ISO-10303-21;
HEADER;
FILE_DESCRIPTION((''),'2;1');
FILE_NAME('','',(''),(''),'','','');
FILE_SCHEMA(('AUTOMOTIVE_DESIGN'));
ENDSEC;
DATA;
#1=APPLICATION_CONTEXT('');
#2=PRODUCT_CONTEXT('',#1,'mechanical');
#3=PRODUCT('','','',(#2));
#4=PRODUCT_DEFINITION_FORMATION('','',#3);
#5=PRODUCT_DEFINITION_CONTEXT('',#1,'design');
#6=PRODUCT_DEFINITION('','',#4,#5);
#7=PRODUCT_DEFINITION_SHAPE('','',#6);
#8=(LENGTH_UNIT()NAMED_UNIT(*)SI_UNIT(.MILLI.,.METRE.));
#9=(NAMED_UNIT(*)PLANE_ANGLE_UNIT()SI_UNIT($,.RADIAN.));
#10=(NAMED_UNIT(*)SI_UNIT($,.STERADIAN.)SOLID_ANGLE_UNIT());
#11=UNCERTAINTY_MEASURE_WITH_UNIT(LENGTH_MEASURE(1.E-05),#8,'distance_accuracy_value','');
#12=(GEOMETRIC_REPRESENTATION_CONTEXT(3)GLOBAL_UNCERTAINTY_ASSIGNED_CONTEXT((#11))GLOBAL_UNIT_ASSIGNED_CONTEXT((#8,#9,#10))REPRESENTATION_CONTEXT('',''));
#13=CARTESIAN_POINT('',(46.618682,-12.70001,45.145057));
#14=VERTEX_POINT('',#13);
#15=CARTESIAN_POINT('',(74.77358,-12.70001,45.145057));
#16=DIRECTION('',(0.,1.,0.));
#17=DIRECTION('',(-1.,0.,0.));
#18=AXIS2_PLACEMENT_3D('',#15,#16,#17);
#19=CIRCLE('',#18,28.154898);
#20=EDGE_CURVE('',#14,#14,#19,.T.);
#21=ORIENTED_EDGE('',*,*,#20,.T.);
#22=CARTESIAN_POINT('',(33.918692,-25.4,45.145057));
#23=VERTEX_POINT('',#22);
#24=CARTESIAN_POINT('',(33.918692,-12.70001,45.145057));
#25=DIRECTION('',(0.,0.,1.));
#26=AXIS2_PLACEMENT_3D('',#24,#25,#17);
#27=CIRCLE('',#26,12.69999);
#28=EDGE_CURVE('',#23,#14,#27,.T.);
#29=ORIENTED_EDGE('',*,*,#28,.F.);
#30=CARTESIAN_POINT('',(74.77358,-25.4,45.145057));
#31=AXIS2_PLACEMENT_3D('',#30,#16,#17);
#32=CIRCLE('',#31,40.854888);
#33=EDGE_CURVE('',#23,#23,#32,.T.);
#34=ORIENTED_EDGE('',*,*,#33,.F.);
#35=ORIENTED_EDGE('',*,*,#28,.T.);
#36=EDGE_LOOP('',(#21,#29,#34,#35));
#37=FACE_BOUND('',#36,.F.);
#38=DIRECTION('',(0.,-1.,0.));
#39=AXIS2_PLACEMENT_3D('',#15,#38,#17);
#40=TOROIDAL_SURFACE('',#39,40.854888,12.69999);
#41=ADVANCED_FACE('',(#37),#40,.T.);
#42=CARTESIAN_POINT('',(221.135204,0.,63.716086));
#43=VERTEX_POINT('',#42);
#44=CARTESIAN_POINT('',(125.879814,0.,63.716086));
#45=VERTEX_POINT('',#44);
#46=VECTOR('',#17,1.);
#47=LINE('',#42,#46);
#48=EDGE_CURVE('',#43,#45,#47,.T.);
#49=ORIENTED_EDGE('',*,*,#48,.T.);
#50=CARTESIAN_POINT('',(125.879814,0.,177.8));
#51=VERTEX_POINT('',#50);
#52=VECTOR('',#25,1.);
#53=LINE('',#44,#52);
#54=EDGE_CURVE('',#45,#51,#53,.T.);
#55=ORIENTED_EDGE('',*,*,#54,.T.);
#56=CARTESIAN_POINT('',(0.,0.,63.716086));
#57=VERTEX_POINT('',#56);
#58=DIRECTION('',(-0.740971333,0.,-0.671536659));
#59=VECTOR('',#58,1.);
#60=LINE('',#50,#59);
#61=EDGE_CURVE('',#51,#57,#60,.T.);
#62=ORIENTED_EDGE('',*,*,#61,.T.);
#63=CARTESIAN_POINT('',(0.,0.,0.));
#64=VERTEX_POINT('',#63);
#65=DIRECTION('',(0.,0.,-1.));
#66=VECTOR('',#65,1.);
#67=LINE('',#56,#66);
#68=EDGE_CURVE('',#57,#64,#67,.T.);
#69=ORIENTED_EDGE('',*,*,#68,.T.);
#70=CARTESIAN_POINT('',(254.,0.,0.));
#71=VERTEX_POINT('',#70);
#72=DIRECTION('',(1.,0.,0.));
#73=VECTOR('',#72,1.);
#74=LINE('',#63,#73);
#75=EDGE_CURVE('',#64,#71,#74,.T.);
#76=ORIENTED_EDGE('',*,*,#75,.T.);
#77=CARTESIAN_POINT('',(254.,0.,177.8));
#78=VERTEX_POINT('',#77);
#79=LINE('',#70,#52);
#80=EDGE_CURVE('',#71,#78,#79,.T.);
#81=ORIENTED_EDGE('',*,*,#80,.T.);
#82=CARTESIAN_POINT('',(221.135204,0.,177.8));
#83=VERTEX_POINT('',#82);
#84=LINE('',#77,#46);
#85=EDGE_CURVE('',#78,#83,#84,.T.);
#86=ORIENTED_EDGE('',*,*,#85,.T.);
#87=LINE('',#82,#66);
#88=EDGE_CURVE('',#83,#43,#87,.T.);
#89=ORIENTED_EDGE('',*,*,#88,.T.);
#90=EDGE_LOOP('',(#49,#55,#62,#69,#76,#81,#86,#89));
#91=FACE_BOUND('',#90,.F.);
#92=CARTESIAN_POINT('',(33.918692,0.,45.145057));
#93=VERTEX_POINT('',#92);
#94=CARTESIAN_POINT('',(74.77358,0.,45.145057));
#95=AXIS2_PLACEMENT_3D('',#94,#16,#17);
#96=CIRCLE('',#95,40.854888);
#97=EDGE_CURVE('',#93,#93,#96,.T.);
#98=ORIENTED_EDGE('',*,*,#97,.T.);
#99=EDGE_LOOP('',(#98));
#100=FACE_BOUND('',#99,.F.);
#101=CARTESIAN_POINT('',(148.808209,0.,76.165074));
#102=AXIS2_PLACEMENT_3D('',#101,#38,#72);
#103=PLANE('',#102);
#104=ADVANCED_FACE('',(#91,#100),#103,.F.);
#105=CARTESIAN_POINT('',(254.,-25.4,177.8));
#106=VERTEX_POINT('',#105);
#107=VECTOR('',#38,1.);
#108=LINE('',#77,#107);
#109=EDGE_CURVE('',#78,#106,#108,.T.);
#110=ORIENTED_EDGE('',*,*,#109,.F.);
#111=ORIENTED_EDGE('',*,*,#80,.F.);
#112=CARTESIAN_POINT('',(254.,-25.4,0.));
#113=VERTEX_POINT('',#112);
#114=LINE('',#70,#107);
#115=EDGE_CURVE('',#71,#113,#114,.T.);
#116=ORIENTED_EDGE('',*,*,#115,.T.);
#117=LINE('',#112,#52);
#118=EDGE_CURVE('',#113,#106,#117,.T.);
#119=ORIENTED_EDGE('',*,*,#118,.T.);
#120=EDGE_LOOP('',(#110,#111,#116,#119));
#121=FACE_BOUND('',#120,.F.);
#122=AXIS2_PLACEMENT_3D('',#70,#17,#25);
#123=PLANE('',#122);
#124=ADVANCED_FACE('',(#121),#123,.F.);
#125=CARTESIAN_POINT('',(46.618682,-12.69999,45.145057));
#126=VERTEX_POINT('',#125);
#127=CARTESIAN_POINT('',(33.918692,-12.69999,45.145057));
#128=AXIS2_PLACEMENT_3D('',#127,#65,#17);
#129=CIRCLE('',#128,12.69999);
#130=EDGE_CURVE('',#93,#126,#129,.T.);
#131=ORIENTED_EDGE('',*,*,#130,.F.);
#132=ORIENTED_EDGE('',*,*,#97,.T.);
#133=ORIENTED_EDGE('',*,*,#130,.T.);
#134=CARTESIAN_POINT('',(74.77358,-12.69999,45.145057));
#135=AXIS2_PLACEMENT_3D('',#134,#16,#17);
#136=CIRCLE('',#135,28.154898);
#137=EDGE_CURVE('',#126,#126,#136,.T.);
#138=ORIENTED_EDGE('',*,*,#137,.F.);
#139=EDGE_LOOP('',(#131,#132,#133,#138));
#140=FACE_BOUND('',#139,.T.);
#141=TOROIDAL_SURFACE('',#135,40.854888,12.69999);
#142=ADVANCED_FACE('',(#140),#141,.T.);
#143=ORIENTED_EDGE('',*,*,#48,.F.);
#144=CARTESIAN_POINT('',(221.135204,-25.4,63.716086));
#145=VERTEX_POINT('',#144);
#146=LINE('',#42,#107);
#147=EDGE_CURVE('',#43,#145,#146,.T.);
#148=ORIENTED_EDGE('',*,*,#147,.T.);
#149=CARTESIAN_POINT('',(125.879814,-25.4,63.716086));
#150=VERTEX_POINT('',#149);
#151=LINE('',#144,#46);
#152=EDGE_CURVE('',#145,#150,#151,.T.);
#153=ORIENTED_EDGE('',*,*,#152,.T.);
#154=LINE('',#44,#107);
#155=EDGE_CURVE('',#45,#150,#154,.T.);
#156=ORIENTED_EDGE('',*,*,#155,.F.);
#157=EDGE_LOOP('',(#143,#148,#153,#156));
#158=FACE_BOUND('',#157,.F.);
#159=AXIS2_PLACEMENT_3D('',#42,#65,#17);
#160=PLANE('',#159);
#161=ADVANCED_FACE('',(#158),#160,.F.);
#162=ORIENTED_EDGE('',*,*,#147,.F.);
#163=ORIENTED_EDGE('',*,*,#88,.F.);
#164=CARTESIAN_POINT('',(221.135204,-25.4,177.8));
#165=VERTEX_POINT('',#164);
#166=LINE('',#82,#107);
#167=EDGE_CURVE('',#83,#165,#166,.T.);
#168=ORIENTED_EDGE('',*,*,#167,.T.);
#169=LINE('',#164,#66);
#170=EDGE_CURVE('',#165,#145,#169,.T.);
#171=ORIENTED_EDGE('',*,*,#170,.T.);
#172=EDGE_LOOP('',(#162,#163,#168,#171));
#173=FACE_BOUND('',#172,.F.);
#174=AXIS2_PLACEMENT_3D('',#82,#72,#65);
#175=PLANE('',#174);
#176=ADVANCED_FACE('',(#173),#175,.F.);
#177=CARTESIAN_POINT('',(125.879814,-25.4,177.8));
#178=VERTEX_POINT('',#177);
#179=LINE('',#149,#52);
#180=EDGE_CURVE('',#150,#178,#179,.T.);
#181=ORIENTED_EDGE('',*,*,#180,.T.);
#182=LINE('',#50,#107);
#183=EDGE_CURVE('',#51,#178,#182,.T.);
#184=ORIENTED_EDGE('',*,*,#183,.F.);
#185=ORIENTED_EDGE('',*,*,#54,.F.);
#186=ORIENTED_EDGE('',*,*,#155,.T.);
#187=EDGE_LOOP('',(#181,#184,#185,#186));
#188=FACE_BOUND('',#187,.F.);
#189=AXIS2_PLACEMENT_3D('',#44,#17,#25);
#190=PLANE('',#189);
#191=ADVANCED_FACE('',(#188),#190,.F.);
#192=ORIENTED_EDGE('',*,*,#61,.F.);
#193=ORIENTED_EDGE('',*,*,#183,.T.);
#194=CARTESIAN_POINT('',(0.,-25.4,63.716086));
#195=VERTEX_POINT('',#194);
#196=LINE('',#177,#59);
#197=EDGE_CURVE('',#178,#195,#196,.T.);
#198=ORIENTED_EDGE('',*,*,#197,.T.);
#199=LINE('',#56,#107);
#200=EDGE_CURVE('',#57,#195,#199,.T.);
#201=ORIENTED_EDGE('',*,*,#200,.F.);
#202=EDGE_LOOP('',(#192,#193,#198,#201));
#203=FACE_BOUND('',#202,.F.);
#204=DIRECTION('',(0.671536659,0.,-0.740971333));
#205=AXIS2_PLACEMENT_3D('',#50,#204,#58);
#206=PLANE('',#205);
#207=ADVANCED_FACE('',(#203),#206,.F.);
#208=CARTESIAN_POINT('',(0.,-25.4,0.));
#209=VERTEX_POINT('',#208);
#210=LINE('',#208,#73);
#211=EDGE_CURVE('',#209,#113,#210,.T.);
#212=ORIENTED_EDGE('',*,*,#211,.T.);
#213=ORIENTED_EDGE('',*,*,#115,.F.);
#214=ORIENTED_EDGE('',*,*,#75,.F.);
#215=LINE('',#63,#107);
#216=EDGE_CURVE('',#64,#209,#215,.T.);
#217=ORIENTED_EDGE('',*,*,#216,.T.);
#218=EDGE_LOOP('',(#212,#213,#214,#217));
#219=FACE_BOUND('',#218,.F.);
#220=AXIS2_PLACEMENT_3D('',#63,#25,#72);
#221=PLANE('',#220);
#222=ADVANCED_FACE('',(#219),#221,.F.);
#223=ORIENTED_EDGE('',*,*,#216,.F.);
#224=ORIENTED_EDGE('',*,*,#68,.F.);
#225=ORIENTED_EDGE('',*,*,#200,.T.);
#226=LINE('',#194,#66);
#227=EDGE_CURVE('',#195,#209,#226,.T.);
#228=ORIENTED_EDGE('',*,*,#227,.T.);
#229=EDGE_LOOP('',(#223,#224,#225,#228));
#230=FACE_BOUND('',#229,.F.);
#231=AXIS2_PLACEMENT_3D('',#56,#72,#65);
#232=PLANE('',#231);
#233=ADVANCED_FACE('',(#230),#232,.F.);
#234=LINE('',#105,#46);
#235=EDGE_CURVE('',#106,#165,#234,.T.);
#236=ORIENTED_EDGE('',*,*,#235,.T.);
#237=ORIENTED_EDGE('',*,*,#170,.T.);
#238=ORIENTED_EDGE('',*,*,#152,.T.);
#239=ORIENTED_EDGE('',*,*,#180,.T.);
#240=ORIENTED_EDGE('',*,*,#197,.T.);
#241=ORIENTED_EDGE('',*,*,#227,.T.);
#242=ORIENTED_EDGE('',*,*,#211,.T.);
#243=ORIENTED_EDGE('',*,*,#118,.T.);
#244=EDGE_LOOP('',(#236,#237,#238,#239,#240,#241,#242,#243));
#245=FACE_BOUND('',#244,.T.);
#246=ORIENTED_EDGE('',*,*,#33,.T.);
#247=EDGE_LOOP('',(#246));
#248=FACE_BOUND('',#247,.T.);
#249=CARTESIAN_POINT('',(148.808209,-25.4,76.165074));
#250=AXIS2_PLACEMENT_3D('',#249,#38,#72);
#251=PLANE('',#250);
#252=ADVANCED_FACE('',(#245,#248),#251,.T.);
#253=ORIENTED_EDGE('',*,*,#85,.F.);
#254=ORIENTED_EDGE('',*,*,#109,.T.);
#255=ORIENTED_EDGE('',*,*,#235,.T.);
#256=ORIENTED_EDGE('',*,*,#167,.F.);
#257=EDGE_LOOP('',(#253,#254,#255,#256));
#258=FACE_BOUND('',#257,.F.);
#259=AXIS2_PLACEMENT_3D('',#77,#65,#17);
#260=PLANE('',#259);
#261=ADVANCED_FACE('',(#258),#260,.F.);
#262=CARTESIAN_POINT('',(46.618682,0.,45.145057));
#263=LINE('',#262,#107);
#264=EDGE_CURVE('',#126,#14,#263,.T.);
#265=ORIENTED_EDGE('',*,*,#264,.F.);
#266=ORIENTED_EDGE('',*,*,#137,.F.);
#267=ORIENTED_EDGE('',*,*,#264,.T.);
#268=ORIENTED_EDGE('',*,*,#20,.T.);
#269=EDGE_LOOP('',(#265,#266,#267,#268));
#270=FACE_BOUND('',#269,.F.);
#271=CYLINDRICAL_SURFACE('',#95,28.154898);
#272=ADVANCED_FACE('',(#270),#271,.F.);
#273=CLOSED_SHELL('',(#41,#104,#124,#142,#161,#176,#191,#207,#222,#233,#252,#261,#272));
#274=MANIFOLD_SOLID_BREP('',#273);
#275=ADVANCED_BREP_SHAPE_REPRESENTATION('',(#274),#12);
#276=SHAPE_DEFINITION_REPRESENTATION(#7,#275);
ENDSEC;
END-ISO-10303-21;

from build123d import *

# Parameters (mm, degrees)
F1_DEPTH = 25.4
F2_R     = 28.1548982212
F3_DEPTH = 25.401
F4_R     = 12.69999


# Not quite as in the source:
# - a fillet or chamfer is up to 0.001 mm smaller than in the source, because OpenCascade refuses the exact size


with BuildPart() as f1:
    # F0 (on Front) → F1 (new body)
    with BuildSketch(Plane.XZ):
        Polygon((0, 63.7160863788), (0, 0), (254, 0), (254, 177.8), (221.1352040053, 177.8), (221.1352040053, 63.7160863788), (125.8798138147, 63.7160863788), (125.8798138147, 177.8), align=None)
    extrude(amount=F1_DEPTH)

    # F2 (on face) → F3 (cut, through all)
    with BuildSketch(Plane(origin=(0, 0, 0), x_dir=(-1, 0, 0), z_dir=(0, 1, 0))):
        with Locations((-74.7735798359, 45.1450571418)):
            Circle(F2_R)
    extrude(amount=-F3_DEPTH, mode=Mode.SUBTRACT)

    # F4 (radius 12.7 in the source; OpenCascade refuses exactly that, so slightly less here)
    f4_edges = [f1.edges().sort_by_distance(p)[0] for p in [
        (102.928478, 0, 45.145057),
        (102.928478, -25.4, 45.145057),
    ]]
    fillet(f4_edges, radius=F4_R)


solid = f1.part
